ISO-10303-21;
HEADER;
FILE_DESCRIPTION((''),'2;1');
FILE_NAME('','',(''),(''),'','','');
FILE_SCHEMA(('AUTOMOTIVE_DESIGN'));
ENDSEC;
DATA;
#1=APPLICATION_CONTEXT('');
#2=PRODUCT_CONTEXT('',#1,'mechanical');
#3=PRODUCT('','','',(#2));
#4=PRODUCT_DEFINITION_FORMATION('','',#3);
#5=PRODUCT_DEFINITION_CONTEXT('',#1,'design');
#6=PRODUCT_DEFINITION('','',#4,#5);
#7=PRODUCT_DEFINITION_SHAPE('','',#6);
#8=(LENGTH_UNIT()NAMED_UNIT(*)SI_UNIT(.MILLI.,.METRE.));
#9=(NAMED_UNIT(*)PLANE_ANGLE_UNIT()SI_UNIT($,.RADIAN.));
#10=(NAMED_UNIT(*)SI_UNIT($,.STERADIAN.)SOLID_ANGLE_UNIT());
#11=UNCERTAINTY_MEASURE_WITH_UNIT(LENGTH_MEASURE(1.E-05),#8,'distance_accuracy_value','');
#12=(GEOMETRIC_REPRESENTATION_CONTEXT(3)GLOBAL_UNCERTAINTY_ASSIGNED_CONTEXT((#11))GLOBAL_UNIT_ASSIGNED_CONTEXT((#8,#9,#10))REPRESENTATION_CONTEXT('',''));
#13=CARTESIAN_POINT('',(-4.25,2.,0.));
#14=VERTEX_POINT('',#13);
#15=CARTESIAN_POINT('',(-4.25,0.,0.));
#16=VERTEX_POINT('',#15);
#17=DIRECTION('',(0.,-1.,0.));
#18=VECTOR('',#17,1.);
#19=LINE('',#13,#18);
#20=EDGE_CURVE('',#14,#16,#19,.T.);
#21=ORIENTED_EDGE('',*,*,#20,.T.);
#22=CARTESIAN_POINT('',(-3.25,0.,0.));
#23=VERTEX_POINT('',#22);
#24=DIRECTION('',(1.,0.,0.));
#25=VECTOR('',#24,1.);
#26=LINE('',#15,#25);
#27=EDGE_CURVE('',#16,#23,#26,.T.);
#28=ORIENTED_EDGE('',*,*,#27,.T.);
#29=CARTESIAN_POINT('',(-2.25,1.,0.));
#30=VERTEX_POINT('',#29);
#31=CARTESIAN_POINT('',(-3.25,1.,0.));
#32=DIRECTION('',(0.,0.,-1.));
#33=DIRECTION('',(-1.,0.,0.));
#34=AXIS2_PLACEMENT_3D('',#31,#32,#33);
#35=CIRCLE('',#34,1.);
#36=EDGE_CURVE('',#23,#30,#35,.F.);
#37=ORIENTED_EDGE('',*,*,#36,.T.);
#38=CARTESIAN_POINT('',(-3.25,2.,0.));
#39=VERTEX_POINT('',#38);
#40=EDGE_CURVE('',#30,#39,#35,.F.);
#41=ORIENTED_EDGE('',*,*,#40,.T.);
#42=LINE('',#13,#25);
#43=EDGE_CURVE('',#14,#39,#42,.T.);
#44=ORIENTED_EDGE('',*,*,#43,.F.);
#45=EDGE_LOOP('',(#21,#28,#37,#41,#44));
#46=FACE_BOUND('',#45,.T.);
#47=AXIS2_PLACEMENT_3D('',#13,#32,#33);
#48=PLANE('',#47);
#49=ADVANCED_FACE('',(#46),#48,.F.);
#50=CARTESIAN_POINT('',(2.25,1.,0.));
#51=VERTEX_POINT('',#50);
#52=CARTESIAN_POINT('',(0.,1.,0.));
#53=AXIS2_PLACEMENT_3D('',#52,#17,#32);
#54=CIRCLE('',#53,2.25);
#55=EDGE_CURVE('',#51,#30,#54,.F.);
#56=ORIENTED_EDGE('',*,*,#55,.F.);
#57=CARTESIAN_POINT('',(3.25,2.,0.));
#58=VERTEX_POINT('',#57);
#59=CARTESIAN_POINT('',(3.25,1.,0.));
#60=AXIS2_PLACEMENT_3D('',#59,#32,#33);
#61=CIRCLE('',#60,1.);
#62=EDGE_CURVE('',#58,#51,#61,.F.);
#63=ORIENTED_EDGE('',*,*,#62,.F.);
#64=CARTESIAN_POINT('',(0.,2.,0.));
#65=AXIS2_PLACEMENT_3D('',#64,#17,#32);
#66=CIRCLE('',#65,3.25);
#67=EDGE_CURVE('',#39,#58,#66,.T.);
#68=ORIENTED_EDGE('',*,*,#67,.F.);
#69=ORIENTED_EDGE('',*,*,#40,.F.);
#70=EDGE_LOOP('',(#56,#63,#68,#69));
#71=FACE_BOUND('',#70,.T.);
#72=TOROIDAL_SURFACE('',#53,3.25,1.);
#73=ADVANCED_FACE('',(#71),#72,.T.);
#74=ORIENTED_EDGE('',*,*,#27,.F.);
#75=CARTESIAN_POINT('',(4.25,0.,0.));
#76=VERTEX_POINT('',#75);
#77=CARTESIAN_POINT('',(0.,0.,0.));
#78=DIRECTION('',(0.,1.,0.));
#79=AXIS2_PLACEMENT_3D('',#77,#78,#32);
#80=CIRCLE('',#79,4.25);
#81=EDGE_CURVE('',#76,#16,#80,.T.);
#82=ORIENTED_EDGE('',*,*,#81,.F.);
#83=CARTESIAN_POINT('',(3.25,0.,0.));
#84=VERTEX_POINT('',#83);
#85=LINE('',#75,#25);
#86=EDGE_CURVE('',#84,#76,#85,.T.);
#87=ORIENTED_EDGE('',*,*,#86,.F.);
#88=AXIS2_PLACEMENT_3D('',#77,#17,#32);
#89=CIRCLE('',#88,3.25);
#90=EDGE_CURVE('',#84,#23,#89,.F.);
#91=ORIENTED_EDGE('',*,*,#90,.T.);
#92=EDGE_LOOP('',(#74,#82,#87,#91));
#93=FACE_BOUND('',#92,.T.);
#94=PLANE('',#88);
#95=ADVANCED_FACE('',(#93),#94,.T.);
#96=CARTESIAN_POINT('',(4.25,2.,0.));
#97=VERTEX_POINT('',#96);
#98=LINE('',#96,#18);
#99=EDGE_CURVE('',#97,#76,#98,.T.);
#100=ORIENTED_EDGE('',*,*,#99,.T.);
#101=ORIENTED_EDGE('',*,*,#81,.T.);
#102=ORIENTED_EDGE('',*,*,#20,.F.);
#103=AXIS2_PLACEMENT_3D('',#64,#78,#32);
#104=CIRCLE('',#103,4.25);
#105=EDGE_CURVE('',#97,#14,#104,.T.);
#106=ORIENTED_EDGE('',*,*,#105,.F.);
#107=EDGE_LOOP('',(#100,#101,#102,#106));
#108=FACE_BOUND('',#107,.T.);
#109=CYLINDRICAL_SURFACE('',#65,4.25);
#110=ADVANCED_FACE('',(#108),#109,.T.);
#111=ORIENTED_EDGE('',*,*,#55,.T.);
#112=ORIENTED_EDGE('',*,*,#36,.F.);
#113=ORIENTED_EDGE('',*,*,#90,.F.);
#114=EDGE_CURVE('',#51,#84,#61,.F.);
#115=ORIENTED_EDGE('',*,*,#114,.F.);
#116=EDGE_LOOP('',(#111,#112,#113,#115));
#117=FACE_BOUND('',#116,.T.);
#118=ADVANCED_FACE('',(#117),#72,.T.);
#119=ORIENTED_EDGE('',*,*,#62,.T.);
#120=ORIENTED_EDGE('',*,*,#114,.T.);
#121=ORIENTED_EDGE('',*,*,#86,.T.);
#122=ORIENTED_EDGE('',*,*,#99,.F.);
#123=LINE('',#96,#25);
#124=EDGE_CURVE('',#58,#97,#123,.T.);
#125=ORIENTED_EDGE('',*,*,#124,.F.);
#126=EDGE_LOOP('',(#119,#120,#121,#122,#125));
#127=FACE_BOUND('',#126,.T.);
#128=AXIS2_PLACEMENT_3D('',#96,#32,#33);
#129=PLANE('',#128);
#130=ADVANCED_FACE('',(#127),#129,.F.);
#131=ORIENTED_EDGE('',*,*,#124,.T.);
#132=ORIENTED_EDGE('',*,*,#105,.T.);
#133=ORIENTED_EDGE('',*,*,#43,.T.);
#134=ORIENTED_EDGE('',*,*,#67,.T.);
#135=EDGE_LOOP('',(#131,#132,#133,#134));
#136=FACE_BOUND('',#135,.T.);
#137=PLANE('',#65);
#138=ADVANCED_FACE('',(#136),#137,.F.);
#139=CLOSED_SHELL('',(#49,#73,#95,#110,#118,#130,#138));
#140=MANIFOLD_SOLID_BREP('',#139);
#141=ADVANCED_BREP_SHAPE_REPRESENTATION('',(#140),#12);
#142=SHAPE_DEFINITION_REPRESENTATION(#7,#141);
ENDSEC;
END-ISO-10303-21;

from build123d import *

# Parameters (mm, degrees)
BOSS_EXTRUDE1_DEPTH = 2
FILLET1_R           = 1


with BuildPart() as part:
    # Sketch1 → Boss-Extrude1 (new body)
    with BuildSketch(Plane(origin=(0, 0, 0), x_dir=(1, 0, 0), z_dir=(0, 1, 0))):
        with BuildLine():
            Line((-4.25, 0), (-2.25, 0))
            ThreePointArc((-2.25, 0), (0, 2.25), (2.25, 0))
            Line((2.25, 0), (4.25, 0))
            ThreePointArc((4.25, 0), (0, 4.25), (-4.25, 0))
        make_face()
    extrude(amount=BOSS_EXTRUDE1_DEPTH)

    # Fillet1
    fillet1_edges = [part.edges().sort_by_distance(p)[0] for p in [
        (0, 0, -2.25),
        (0, 2, -2.25),
    ]]
    fillet(fillet1_edges, radius=FILLET1_R - 0.0001)  # a hair under: the kernel refuses the full size


solid = part.part
